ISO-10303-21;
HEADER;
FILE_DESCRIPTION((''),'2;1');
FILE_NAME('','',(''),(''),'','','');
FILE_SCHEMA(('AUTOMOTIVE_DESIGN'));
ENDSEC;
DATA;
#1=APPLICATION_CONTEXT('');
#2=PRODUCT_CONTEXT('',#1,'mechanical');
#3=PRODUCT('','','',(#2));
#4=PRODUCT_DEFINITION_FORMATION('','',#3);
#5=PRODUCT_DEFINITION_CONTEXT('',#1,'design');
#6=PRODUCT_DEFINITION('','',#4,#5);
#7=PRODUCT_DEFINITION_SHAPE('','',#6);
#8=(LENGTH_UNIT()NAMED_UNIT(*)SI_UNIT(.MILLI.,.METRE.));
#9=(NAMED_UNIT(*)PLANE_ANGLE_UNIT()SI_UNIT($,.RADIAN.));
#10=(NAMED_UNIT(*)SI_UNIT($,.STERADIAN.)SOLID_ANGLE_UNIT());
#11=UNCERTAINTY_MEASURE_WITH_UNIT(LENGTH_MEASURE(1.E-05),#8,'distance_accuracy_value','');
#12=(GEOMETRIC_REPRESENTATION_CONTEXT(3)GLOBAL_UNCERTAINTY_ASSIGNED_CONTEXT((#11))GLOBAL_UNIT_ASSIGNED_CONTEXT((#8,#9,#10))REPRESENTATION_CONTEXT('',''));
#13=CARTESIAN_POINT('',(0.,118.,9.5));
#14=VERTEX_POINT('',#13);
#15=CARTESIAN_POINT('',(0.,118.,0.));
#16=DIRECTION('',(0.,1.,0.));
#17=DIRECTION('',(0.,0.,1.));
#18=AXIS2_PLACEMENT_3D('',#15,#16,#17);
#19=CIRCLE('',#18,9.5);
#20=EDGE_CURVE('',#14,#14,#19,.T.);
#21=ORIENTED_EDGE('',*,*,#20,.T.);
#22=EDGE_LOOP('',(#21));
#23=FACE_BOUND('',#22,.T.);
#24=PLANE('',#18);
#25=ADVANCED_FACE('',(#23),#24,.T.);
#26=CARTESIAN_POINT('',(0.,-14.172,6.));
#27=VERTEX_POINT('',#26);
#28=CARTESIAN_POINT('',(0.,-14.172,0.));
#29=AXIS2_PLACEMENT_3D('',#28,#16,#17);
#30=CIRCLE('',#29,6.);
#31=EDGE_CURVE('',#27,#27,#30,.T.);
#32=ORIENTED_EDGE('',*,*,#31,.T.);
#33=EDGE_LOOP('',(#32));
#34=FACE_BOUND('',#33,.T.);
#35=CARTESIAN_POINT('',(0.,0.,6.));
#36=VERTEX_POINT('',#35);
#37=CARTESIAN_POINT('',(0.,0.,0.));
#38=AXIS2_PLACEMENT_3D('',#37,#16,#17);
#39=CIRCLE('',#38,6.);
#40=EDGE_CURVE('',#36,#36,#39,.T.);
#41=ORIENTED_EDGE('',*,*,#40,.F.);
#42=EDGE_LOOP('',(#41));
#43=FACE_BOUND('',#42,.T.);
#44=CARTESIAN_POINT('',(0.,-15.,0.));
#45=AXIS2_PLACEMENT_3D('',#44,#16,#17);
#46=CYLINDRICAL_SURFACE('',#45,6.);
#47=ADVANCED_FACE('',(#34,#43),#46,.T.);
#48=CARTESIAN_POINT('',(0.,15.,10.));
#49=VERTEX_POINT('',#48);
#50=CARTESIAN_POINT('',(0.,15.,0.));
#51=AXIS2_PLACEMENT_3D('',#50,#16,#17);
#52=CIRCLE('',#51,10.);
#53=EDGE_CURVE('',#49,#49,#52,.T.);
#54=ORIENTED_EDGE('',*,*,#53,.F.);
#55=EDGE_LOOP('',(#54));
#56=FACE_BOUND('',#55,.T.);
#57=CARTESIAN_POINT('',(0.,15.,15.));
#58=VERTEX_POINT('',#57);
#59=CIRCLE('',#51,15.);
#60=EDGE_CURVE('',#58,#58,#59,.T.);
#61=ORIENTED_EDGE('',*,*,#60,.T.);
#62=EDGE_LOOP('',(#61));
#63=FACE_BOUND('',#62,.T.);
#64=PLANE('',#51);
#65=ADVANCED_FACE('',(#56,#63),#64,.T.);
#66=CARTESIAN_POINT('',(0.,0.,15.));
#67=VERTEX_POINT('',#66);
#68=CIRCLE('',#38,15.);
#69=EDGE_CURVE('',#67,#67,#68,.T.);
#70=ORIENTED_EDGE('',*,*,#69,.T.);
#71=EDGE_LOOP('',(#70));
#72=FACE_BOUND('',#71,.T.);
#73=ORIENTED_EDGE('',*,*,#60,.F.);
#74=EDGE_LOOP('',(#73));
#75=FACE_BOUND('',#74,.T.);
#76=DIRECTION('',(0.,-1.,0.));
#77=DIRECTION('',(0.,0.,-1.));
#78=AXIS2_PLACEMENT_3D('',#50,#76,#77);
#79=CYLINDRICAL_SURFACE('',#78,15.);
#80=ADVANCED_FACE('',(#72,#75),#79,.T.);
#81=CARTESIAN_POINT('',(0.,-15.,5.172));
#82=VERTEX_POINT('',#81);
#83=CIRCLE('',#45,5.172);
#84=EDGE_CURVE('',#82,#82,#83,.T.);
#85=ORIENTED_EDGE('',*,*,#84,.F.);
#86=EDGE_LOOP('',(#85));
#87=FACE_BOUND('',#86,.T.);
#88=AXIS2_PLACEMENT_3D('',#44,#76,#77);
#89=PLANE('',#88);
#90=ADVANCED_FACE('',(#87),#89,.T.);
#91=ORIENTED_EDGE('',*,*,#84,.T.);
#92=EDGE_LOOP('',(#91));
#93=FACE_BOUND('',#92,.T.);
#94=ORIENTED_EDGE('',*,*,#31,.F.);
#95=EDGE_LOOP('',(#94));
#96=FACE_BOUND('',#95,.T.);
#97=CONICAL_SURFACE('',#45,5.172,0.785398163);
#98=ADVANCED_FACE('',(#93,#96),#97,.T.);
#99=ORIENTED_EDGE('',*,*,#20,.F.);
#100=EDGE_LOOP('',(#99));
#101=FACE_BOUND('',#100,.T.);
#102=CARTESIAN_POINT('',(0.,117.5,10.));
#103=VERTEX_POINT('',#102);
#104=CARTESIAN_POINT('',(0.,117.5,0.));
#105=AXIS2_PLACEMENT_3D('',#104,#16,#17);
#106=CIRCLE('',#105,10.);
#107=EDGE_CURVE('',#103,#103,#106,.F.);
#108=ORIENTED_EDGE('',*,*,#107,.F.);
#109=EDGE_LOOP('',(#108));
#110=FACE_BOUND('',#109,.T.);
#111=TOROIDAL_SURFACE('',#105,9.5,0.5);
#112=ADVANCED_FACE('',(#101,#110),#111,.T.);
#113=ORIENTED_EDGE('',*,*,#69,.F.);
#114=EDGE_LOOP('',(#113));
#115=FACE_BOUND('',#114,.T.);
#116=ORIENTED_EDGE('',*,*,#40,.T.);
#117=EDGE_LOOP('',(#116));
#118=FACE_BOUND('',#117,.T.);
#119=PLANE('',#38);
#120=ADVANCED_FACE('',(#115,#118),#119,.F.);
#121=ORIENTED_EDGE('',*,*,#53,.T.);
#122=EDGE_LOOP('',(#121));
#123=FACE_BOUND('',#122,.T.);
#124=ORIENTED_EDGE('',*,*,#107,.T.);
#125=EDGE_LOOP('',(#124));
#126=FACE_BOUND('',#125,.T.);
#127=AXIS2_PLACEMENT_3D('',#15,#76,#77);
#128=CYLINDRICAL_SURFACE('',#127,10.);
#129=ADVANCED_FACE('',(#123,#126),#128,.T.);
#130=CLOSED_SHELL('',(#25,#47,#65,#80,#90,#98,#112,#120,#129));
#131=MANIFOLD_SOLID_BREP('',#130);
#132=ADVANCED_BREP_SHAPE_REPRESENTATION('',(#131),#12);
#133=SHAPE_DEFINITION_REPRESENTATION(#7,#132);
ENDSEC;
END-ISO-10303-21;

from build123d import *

# Parameters (mm, degrees)
SKETCH1_R           = 15
BOSS_EXTRUDE1_DEPTH = 15
SKETCH2_R           = 10
BOSS_EXTRUDE2_DEPTH = 103
SKETCH3_R           = 7.5
BOSS_EXTRUDE3_DEPTH = 15
FILLET1_R           = 0.5


# Read off the part's stored shape, not the designer's step: M12x1.5 Machine Threads Stud1
with BuildPart() as part:
    # Sketch1 → Boss-Extrude1 (new body)
    with BuildSketch(Plane(origin=(0, 0, 0), x_dir=(1, 0, 0), z_dir=(0, 1, 0))):
        with Locations(Location((0, 0, 0), (0, 0, 270))):
            Circle(SKETCH1_R)
    extrude(amount=BOSS_EXTRUDE1_DEPTH)

    # Sketch2 → Boss-Extrude2 (add)
    with BuildSketch(Plane(origin=(0, 15, 0), x_dir=(1, 0, 0), z_dir=(0, 1, 0))):
        with Locations(Location((0, 0, 0), (0, 0, 270))):
            Circle(SKETCH2_R)
    extrude(amount=BOSS_EXTRUDE2_DEPTH)

    # Sketch3 → Boss-Extrude3 (add)
    with BuildSketch(Plane.XZ):
        with Locations(Location((0, 0, 0), (0, 0, 270))):
            Circle(SKETCH3_R)
    extrude(amount=BOSS_EXTRUDE3_DEPTH)

    # M12x1.5 Machine Threads Stud1 outline → M12x1.5 Machine Threads Stud1 (revolve, cut)
    with BuildSketch(Plane.XY):
        Polygon((7.5, 0), (6, 0), (6, -14.172), (5.172, -15), (7.5, -15), align=None)
    revolve(axis=Axis((0, 0, 0), (0, 1, 0)), mode=Mode.SUBTRACT)

    # Fillet1
    fillet1_edges = [part.edges().sort_by_distance(p)[0] for p in [
        (0, 118, -10),
    ]]
    fillet(fillet1_edges, radius=FILLET1_R)


solid = part.part
